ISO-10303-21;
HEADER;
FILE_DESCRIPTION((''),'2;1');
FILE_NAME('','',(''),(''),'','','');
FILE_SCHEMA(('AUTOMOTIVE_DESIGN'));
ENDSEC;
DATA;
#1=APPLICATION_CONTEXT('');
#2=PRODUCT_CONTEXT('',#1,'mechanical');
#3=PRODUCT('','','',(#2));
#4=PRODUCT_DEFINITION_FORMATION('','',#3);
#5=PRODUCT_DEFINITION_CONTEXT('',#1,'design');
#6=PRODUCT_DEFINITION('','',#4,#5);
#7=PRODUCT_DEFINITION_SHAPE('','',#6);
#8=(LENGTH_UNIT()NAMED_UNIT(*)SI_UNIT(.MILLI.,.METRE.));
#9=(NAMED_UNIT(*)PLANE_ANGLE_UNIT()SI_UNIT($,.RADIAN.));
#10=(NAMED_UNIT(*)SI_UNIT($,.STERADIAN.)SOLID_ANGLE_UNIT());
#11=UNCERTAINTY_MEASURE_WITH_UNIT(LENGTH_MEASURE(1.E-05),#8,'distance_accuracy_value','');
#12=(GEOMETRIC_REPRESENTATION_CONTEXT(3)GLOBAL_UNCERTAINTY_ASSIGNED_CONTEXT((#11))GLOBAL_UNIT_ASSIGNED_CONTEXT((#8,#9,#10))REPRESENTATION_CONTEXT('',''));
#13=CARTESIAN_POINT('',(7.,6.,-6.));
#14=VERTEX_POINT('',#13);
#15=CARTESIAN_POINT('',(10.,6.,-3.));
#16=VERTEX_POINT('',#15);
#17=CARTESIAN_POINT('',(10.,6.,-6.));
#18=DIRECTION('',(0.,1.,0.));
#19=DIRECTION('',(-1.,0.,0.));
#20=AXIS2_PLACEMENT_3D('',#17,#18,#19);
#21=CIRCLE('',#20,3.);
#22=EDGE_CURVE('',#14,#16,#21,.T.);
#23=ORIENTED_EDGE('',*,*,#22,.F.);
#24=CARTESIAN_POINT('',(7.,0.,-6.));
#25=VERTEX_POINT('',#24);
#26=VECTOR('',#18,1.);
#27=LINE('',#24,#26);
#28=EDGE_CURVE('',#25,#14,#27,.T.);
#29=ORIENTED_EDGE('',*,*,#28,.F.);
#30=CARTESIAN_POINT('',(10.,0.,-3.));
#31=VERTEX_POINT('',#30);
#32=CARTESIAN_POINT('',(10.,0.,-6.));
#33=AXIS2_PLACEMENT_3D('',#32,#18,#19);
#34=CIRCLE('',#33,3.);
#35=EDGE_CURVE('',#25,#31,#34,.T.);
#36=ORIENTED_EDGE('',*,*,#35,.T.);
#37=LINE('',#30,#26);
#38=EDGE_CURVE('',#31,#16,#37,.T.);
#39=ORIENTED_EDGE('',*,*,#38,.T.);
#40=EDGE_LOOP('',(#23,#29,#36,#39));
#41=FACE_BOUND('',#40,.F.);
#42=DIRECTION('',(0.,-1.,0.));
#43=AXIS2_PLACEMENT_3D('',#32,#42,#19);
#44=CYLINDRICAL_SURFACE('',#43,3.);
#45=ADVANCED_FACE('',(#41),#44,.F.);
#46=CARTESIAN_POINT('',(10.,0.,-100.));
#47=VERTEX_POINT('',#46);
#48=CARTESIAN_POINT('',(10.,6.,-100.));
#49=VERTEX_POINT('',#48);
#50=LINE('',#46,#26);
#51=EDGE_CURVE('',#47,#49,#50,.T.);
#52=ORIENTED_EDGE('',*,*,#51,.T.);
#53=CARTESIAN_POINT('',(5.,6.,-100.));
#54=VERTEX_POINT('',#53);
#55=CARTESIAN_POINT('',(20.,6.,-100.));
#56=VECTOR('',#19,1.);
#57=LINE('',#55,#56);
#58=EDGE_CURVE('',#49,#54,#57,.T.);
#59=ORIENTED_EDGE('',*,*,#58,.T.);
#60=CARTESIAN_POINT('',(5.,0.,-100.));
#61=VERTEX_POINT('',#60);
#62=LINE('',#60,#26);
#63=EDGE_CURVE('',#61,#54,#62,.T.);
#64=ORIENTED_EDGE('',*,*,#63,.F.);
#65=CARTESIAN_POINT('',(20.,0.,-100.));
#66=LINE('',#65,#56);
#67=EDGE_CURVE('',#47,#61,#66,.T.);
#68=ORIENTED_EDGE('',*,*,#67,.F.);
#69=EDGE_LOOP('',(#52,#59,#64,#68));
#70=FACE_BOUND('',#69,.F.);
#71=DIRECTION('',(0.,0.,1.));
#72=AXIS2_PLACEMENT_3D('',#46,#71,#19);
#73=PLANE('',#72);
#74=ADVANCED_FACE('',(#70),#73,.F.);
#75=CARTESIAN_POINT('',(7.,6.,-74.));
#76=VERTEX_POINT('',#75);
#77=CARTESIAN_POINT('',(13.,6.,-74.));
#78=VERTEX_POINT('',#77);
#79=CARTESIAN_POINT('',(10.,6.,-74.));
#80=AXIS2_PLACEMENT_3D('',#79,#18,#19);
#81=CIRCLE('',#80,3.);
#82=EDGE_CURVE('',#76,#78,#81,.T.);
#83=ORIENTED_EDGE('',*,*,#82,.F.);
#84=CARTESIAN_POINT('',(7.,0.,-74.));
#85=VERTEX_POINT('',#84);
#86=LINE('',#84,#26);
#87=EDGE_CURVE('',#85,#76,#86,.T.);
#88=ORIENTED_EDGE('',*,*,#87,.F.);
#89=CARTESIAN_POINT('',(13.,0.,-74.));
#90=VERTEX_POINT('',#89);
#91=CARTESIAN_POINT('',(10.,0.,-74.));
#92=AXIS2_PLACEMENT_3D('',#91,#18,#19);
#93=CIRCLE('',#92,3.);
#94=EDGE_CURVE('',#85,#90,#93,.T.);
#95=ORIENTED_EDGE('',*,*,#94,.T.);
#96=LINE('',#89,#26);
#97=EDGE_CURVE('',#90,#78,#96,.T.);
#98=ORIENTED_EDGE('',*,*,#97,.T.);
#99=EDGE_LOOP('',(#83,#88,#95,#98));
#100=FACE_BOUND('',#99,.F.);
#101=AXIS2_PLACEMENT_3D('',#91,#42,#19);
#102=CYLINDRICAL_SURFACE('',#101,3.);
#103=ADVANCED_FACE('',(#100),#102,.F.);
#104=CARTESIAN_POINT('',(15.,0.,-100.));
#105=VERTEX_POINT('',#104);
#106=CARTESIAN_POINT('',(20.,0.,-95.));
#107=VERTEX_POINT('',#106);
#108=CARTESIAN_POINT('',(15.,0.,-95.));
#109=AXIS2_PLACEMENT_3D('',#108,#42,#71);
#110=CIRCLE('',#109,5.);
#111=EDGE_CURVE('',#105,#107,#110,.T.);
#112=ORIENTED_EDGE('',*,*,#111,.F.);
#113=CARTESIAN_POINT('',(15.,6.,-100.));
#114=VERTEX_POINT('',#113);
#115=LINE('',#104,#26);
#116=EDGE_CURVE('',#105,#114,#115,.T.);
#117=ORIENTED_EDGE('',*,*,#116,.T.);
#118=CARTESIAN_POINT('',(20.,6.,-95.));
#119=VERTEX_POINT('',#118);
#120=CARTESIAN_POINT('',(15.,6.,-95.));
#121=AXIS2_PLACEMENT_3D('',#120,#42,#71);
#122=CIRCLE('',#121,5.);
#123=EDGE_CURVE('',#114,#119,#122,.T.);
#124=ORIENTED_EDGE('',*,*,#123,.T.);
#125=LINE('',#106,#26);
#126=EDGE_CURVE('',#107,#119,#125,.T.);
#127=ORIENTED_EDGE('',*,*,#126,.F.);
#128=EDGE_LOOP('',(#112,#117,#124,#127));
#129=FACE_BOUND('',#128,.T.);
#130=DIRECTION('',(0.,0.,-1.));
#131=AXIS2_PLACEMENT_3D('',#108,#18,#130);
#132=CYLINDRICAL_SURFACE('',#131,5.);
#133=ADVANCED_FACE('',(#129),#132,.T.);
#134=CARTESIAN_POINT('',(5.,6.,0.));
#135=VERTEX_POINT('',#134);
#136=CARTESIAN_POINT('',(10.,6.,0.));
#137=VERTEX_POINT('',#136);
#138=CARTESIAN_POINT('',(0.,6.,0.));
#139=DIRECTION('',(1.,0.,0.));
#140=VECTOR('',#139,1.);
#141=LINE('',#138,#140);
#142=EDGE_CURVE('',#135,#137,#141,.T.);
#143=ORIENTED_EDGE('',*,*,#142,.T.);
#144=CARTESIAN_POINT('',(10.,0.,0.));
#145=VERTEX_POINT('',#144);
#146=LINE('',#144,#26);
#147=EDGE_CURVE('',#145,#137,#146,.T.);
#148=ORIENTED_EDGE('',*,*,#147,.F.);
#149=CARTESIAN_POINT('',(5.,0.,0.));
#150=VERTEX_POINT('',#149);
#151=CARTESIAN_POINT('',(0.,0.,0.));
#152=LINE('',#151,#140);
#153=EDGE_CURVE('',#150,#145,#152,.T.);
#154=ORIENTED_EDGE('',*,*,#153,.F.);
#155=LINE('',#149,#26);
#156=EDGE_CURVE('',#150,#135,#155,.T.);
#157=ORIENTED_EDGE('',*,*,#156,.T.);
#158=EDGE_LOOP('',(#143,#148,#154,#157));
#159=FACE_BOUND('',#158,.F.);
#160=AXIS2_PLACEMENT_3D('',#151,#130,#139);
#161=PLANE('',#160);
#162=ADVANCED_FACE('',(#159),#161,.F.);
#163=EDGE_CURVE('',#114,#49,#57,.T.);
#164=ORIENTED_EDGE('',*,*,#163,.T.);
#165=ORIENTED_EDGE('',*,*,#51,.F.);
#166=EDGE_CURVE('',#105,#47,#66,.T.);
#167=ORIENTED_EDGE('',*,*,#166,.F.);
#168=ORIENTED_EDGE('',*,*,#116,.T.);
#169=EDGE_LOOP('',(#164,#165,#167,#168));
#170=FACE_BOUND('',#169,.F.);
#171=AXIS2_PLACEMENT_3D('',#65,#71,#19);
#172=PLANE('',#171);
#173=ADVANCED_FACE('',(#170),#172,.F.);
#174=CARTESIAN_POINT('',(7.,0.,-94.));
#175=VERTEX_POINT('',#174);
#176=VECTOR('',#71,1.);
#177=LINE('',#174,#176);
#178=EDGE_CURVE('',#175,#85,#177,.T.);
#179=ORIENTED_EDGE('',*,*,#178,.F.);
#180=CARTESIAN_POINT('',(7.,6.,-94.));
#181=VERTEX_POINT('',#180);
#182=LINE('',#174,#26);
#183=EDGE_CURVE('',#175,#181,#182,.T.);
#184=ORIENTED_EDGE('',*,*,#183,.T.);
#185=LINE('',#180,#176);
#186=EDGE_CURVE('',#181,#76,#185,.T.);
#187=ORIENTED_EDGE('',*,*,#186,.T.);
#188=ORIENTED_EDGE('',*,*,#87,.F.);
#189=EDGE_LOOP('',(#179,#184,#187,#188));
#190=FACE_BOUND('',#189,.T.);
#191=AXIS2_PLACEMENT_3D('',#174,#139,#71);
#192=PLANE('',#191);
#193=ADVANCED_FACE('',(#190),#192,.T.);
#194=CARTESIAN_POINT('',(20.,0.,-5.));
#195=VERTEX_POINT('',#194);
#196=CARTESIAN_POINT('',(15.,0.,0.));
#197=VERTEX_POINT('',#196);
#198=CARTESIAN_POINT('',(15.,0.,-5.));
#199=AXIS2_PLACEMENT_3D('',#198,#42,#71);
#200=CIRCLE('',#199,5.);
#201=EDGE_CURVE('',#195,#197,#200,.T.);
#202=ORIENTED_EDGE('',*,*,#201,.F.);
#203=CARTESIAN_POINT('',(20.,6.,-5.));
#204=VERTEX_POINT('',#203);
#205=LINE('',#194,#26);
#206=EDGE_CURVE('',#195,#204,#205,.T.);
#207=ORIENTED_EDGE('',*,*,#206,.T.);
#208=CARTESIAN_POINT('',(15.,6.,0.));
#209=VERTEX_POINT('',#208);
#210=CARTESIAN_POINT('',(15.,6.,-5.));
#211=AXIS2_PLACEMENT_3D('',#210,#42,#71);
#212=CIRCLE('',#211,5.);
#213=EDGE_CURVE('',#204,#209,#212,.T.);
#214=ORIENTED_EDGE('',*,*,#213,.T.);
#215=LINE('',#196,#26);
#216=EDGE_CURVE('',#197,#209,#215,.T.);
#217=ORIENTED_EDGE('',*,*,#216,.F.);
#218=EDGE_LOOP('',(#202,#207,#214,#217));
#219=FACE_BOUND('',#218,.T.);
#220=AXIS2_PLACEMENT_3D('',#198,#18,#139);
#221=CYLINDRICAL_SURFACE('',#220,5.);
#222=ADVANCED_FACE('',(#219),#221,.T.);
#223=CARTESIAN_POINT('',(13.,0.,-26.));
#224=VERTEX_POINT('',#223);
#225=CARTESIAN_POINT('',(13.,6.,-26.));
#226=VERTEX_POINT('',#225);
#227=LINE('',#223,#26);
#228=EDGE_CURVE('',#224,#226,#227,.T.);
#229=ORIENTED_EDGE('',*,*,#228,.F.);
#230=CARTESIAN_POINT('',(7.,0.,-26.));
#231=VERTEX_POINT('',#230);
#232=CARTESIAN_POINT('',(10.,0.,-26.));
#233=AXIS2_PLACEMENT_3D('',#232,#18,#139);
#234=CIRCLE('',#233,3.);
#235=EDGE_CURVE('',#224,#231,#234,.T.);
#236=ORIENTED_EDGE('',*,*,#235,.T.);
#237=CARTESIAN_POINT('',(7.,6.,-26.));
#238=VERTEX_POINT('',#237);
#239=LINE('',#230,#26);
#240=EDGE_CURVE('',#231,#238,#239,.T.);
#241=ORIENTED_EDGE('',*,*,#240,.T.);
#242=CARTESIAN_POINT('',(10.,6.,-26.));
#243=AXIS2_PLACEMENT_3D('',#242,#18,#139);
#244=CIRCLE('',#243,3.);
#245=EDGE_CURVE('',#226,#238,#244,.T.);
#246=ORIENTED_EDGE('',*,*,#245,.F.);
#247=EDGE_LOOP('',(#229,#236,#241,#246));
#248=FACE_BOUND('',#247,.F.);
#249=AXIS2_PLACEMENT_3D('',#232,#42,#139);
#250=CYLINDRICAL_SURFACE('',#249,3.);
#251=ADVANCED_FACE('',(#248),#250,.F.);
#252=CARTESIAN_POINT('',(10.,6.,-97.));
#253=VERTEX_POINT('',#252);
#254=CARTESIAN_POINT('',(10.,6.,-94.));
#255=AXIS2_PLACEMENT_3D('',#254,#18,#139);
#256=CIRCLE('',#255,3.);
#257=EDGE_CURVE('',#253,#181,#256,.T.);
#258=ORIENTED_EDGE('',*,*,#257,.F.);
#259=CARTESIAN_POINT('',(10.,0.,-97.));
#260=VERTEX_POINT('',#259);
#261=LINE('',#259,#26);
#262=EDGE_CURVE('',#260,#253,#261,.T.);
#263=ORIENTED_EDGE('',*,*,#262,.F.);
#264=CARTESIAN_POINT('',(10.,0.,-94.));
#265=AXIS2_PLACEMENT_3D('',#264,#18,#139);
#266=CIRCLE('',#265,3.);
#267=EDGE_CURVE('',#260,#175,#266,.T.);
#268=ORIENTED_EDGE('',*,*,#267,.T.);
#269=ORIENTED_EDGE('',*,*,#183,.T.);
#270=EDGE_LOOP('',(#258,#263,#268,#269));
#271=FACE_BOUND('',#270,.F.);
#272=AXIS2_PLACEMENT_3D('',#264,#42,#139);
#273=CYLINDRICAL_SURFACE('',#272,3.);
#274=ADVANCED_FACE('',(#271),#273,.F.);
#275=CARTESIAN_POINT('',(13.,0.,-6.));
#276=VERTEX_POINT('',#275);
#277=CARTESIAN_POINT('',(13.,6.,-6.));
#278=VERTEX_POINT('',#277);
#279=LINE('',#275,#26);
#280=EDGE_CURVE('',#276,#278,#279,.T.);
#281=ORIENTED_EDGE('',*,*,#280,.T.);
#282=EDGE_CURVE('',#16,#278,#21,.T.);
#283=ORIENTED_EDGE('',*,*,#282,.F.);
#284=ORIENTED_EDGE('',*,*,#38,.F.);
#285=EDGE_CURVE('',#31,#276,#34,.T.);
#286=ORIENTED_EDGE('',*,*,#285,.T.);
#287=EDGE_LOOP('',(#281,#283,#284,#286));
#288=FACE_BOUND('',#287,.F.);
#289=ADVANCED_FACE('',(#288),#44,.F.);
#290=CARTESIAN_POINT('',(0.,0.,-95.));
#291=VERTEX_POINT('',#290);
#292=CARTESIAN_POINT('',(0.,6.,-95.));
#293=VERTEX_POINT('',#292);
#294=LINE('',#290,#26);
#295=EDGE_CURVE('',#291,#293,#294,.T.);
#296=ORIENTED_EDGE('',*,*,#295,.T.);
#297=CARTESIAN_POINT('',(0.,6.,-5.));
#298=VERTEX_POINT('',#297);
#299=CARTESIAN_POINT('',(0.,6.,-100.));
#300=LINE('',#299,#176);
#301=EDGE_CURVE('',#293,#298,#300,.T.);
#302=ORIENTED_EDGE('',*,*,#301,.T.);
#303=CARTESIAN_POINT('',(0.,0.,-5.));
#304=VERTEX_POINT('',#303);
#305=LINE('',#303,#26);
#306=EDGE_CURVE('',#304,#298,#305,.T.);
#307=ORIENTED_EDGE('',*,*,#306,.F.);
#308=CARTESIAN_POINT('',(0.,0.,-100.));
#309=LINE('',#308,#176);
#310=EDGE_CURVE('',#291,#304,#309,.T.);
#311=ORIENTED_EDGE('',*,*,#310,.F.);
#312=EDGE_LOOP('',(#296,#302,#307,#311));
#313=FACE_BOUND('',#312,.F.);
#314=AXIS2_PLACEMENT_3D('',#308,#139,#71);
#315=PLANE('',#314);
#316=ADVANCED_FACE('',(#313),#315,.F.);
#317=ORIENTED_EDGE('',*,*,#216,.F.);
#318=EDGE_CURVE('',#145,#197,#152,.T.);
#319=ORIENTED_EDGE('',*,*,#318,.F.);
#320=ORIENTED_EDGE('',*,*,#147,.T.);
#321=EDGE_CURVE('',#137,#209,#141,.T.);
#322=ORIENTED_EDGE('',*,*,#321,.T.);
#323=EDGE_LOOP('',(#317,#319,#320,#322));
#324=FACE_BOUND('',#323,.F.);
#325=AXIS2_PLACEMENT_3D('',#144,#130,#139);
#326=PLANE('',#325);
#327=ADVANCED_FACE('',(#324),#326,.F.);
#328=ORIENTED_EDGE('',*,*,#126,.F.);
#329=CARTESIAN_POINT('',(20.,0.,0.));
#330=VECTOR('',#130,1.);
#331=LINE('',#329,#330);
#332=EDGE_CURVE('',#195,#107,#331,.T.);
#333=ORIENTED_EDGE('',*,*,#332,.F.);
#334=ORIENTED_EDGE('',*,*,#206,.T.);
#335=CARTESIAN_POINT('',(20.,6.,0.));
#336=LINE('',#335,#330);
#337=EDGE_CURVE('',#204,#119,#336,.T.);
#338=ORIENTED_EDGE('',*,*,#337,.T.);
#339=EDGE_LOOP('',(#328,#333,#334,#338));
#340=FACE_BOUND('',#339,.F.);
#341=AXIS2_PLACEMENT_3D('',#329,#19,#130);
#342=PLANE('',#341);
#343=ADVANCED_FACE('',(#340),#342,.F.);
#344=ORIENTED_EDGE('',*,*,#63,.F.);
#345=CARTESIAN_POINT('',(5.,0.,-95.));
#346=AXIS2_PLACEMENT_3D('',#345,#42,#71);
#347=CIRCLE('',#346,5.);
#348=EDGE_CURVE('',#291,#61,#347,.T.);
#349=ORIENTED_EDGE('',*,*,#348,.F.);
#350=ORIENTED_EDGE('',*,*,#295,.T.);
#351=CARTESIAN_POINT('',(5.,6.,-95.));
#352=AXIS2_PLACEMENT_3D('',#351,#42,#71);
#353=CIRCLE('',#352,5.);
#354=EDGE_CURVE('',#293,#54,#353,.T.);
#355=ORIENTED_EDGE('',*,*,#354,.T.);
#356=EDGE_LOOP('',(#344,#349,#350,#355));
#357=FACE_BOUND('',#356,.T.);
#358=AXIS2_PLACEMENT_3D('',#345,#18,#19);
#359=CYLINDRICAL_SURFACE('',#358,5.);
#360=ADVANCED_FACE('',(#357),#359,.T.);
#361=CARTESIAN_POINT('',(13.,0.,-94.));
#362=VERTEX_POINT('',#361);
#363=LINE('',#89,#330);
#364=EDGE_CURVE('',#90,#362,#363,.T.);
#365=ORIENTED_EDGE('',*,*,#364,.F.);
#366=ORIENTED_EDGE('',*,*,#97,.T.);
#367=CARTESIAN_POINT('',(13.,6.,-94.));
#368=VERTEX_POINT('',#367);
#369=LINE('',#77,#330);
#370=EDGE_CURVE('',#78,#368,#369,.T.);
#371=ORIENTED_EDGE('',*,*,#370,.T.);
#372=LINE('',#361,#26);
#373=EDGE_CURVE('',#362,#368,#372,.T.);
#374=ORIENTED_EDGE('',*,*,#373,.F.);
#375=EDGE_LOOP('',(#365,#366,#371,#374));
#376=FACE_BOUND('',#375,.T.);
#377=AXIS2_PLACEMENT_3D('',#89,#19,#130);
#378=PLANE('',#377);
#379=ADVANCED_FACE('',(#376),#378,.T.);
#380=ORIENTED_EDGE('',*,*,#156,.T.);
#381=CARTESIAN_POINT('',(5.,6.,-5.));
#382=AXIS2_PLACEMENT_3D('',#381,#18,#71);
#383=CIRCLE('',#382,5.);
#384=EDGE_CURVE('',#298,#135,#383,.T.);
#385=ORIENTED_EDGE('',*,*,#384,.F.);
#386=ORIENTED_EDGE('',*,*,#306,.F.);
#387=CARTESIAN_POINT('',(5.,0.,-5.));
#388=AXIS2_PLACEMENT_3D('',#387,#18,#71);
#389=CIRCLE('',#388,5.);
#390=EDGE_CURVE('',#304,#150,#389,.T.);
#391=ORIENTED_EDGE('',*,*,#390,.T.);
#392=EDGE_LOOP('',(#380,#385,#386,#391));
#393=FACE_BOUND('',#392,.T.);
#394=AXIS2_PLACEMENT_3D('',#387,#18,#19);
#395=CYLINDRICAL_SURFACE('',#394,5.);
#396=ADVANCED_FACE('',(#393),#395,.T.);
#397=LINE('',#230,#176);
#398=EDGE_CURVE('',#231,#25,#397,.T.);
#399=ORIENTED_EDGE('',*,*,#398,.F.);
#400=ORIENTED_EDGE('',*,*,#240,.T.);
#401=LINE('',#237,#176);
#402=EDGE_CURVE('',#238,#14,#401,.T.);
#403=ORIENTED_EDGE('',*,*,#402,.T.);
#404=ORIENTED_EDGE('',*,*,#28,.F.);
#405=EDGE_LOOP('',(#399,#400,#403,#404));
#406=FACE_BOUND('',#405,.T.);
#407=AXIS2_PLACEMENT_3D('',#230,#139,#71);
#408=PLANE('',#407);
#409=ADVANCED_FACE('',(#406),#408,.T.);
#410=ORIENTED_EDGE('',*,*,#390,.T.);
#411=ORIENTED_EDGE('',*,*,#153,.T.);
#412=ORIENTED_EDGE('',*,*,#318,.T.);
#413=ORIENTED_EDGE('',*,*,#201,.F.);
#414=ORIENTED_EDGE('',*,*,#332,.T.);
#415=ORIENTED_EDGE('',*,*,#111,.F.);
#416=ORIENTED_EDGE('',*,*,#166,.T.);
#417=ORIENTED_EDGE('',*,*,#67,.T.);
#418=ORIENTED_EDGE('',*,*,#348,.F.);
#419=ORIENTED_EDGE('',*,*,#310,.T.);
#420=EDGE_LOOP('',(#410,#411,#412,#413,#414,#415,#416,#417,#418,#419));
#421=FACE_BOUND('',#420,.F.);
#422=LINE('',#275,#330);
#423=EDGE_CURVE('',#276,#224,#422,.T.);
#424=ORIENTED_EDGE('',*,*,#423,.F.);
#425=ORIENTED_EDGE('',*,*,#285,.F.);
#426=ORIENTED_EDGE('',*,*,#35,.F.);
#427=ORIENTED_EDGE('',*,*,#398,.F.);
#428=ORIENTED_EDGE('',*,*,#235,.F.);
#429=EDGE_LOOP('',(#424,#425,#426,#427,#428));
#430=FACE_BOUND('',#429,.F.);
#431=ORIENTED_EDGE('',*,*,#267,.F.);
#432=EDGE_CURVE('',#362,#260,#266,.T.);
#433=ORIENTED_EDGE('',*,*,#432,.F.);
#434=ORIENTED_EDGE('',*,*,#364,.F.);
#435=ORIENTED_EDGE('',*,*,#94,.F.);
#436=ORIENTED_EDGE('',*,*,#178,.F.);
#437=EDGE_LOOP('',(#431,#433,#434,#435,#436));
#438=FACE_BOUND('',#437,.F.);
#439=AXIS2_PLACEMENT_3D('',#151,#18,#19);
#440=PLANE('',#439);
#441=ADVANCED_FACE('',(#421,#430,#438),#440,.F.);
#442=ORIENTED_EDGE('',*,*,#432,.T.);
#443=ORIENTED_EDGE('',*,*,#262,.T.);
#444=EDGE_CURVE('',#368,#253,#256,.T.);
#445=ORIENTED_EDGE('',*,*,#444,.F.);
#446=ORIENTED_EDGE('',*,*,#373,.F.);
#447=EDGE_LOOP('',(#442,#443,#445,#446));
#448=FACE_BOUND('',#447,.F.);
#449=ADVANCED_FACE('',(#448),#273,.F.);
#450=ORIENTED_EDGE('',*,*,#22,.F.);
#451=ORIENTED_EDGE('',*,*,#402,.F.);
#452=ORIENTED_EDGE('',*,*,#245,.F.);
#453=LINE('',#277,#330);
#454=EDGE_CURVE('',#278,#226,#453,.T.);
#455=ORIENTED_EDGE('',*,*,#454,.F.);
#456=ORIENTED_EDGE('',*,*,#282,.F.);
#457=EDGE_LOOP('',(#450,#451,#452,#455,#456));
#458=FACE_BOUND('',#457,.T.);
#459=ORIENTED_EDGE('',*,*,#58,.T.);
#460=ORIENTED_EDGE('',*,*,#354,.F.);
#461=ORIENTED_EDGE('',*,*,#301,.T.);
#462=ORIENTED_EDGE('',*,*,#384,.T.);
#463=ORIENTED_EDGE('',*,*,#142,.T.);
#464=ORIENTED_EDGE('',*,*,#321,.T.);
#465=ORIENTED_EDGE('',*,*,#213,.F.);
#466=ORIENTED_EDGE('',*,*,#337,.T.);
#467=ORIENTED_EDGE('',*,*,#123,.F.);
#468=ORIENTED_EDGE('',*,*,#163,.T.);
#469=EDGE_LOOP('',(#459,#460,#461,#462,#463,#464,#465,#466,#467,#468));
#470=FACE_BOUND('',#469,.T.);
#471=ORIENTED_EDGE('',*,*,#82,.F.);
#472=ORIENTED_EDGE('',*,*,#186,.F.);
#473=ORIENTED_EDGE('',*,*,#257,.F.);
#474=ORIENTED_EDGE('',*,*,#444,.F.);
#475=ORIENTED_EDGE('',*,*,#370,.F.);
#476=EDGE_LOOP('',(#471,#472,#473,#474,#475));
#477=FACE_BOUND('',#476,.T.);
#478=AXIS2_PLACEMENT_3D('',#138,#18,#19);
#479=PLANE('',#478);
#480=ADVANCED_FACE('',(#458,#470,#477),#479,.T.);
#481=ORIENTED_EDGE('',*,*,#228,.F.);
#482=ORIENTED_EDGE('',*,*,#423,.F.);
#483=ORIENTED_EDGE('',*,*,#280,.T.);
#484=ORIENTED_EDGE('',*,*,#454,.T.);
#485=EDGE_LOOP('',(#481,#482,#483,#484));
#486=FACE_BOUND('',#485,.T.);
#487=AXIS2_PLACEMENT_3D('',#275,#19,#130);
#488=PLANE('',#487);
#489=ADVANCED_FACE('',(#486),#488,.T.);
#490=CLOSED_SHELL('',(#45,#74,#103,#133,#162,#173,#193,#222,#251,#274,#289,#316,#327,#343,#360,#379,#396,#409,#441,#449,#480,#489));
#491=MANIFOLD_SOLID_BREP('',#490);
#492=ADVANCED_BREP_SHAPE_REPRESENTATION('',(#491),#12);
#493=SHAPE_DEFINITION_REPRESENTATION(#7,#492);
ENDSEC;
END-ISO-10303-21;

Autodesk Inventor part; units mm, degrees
ref_plane "YZ Plane" through (0, 0, 0) normal (1, 0, 0) x (0, 1, 0)
ref_plane "XZ Plane" through (0, 0, 0) normal (0, 1, 0) x (-1, 0, 0)
ref_plane "XY Plane" through (0, 0, 0) normal (0, 0, 1) x (1, 0, 0)
sketch "Sketch1" plane through (0, 0, 0) normal (0, 1, 0) x (-1, 0, 0)
  line L0 (0, 0) -> (-20, 0)
  line L1 (-20, 0) -> (-20, -100)
  line L2 (-20, -100) -> (0, -100)
  line L3 (0, -100) -> (0, 0)
  line L4 (-10, 0) -> (-10, -6)
  line L5 (-10, -6) -> (60, -6) construction
  line L6 (-10, -6) -> (-10, -26) construction
  line L7 (-13, -6) -> (-13, -26)
  line L8 (-7, -26) -> (-7, -6)
  arc A0 (-7, -6) -> (-13, -6) centre (-10, -6) ccw
  arc A1 (-13, -26) -> (-7, -26) centre (-10, -26) ccw
  line L9 (-10, -100) -> (-10, -94)
  line L10 (-10, -94) -> (-10, -74) construction
  line L11 (-7, -94) -> (-7, -74)
  line L12 (-13, -74) -> (-13, -94)
  arc A2 (-13, -94) -> (-7, -94) centre (-10, -94) ccw
  arc A3 (-7, -74) -> (-13, -74) centre (-10, -74) ccw
  point P0 (-10, -16)
  point P1 (-10, -84)
  dimension "d0" = 20
  dimension "d1" = 100
  dimension "d2" = 6
  dimension "d9" = 20
  dimension "d10" = 6
  dimension "d11" = 6
  dimension "d12" = 20
  dimension "d13" = 6
extrude "Extrusion1" add sketch "Sketch1" along normal blind 6
fillet "Fillet1" radius 5 4 edges at (20, 3, 0) (0, 3, 0) (20, 3, -100) (0, 3, -100)
properties part number "Carriage_Horizontal_Spacer"
